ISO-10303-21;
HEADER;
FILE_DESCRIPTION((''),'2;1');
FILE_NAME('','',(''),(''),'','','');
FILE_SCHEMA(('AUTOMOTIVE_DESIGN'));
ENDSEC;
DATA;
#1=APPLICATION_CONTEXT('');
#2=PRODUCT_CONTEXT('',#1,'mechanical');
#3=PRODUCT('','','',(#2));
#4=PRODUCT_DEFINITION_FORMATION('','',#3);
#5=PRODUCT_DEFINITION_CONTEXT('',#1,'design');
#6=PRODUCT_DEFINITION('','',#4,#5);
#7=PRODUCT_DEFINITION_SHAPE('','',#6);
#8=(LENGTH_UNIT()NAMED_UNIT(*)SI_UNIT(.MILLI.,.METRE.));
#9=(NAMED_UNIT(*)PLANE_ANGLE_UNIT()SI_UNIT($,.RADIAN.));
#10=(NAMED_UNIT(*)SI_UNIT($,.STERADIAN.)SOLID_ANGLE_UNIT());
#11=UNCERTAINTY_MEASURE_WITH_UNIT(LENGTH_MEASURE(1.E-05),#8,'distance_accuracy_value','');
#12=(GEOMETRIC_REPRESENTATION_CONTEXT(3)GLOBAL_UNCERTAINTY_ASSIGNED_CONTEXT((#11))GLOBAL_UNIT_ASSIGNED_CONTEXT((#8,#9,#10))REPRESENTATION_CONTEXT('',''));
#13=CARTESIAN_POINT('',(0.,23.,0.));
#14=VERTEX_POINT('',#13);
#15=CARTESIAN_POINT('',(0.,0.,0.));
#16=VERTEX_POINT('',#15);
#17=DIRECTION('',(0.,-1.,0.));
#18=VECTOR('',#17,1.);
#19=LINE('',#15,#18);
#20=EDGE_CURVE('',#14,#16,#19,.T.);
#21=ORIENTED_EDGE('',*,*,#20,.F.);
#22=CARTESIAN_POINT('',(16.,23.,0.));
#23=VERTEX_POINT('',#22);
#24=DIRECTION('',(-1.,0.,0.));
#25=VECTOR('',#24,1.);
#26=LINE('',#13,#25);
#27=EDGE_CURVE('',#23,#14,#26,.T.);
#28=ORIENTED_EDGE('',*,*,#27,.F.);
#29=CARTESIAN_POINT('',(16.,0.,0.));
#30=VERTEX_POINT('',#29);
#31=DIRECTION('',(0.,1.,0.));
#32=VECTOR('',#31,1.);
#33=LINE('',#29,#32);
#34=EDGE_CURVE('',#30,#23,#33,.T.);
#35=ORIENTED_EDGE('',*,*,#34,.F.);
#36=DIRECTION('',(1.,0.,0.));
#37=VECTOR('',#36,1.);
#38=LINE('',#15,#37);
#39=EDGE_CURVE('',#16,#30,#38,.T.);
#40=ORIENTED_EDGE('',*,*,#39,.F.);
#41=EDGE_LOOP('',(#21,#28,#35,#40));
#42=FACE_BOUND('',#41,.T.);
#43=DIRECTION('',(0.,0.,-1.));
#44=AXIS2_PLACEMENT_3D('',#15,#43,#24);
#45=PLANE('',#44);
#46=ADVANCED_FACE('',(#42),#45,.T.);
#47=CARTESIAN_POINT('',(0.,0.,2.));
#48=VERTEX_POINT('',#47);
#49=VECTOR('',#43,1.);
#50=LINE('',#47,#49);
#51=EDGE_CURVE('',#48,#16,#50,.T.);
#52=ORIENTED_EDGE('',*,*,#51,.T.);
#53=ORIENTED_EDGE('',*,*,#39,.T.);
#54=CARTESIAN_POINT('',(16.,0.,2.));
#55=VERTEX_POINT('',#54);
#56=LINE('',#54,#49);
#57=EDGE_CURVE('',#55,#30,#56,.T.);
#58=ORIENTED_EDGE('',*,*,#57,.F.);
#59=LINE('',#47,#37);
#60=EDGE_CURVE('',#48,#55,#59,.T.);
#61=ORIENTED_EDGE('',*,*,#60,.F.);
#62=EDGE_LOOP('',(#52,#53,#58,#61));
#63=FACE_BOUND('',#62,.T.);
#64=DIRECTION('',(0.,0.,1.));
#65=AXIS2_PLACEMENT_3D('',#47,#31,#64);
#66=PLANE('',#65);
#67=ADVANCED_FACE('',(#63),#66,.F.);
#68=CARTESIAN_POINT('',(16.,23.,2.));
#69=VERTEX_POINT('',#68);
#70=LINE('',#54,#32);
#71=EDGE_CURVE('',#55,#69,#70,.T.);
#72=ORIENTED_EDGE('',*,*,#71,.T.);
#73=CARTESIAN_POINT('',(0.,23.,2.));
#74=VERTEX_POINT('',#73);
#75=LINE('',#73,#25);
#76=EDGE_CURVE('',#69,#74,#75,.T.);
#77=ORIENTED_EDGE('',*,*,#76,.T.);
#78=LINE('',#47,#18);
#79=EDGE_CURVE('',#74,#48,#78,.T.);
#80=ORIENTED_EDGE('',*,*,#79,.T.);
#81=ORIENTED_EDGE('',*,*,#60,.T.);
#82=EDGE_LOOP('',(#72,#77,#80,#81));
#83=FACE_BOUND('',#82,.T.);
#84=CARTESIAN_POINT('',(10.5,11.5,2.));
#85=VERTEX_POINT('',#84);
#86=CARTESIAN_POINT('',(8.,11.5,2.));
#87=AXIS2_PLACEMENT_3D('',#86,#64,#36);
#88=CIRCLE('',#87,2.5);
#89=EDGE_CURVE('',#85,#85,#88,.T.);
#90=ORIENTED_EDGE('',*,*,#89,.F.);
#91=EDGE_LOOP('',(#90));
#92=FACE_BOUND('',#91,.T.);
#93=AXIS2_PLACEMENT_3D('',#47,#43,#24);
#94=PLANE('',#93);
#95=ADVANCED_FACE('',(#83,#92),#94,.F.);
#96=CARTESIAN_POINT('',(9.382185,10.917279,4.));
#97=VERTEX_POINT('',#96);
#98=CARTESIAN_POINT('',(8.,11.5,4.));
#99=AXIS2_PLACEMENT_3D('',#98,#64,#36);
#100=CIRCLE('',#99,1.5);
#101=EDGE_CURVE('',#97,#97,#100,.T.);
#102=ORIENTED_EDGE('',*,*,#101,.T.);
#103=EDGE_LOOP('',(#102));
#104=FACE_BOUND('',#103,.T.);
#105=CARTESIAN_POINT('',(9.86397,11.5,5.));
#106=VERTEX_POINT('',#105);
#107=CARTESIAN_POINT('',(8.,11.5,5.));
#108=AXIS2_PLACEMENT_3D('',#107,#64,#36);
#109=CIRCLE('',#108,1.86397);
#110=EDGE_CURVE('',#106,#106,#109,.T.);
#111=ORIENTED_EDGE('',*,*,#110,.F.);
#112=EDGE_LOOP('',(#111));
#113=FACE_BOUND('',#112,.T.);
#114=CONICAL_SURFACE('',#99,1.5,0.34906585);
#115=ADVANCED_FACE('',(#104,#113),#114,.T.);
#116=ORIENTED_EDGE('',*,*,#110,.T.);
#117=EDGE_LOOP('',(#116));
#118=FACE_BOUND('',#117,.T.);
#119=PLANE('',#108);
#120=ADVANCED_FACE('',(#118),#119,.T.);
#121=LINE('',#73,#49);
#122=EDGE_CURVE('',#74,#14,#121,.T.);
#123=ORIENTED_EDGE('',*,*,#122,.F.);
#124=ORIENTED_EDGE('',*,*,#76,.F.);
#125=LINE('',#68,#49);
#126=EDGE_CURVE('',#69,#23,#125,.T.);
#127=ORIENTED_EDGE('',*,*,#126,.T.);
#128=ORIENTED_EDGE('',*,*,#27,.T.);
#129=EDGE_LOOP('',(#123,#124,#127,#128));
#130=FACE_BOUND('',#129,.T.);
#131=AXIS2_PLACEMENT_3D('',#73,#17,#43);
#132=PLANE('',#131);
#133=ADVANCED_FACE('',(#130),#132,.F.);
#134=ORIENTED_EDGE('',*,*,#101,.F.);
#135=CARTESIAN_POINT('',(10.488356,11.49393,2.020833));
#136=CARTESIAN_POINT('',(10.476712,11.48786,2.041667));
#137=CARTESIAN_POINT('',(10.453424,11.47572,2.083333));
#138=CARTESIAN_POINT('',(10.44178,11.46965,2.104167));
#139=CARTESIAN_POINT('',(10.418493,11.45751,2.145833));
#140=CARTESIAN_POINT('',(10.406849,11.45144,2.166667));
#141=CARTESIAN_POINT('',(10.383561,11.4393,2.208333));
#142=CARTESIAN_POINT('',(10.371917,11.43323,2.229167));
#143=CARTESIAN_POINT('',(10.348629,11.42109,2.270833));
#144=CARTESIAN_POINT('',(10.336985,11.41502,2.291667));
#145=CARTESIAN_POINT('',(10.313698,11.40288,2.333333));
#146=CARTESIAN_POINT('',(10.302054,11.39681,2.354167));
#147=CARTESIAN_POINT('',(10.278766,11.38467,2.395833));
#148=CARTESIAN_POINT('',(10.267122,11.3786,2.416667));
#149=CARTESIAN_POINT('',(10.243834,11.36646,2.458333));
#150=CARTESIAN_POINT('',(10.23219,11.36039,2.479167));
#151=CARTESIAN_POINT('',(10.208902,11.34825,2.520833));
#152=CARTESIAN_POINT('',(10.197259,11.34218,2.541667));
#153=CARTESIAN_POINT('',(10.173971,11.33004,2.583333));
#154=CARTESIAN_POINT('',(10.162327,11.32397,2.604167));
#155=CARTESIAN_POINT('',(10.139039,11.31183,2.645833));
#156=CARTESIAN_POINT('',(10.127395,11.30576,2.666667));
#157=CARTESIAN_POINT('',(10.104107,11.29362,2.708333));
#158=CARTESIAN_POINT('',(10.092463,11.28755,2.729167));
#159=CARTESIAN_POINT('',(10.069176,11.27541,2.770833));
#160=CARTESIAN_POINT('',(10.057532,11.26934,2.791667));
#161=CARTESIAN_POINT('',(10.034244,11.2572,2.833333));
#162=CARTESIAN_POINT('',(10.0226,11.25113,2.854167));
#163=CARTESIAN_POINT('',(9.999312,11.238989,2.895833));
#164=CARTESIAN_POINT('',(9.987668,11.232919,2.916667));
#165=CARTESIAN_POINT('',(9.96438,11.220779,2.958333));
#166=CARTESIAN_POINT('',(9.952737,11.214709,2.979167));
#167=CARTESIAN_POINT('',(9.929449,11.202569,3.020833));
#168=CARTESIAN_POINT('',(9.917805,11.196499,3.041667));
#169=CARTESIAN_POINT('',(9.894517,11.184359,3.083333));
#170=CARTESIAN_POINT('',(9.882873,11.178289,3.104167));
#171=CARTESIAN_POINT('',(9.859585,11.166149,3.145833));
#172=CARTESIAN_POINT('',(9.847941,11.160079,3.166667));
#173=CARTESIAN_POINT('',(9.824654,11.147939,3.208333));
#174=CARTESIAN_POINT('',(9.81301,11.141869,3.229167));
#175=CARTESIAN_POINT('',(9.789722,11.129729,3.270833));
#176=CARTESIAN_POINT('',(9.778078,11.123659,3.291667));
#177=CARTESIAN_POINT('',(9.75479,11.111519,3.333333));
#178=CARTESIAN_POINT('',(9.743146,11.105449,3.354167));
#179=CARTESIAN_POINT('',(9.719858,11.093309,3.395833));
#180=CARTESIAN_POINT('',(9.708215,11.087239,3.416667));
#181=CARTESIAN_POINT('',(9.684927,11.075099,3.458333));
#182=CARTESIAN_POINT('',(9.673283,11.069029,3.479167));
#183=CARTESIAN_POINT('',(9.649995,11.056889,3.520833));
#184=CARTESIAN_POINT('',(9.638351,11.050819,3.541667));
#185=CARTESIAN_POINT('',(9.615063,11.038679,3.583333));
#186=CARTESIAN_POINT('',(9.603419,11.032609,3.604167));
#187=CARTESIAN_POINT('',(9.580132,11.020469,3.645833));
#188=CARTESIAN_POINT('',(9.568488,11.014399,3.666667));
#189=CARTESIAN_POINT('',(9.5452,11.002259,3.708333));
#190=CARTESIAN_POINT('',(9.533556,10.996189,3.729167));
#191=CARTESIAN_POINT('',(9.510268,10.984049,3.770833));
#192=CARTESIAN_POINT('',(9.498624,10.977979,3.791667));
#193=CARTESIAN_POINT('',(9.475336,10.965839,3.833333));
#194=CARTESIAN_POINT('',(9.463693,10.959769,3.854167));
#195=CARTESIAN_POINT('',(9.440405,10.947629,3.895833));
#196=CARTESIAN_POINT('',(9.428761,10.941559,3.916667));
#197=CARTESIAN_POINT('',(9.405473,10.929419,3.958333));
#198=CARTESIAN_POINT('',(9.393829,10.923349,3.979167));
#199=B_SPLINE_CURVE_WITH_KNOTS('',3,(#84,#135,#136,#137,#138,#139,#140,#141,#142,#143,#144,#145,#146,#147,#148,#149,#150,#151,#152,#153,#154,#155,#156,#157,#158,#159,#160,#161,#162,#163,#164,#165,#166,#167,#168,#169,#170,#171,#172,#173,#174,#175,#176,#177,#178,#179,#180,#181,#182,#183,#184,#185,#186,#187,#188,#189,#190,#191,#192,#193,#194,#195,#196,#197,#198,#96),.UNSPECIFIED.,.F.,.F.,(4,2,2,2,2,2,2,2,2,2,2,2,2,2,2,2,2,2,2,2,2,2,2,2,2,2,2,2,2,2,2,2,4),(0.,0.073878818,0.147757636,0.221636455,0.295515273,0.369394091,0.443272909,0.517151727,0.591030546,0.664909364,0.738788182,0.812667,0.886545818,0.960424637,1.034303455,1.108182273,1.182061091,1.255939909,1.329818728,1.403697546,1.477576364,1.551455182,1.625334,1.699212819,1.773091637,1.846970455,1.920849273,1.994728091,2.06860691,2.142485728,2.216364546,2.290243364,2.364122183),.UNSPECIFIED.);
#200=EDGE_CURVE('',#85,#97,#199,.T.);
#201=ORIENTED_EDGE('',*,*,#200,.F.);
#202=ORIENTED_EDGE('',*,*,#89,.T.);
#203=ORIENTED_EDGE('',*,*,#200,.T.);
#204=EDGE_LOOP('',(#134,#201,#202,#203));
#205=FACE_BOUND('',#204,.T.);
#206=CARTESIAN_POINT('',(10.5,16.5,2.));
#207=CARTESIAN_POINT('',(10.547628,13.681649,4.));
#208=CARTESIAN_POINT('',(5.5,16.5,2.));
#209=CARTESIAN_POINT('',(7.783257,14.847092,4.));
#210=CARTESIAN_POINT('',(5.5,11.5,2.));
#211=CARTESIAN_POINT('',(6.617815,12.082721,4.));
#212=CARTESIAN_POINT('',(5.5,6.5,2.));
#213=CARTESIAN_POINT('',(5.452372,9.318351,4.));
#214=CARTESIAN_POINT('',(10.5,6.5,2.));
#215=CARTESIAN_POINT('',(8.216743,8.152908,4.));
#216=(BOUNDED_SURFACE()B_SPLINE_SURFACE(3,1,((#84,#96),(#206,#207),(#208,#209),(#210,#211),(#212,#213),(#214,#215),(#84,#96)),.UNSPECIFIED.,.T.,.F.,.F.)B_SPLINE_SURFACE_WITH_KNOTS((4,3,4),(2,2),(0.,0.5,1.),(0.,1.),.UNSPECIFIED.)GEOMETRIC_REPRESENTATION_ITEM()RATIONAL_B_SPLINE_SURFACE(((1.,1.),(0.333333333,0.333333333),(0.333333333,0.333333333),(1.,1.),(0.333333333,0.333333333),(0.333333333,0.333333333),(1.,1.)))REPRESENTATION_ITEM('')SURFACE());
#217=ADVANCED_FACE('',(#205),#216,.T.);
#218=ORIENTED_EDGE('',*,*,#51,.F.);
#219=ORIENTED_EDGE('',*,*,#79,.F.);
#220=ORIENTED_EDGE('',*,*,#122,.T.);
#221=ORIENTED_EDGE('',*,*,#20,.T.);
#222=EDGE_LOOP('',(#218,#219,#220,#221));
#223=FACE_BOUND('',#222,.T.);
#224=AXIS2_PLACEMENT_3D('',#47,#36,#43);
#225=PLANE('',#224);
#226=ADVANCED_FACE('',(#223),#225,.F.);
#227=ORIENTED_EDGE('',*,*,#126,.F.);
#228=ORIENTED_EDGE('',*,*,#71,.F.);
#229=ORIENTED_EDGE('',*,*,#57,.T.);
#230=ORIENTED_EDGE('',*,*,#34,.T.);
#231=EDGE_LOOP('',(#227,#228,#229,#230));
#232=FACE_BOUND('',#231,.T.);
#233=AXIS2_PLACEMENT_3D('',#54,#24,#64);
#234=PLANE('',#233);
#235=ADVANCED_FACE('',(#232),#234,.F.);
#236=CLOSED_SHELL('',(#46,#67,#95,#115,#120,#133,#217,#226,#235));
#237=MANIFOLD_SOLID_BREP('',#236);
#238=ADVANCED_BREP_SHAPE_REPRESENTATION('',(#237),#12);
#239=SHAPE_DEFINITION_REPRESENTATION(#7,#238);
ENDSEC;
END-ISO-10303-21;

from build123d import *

# Parameters (mm, degrees)
SKETCH1_W           = 16
SKETCH1_H           = 23
BOSS_EXTRUDE1_DEPTH = 2
SKETCH6_R           = 1.5
BOSS_EXTRUDE3_DEPTH = 1
BOSS_EXTRUDE3_DRAFT = -20


with BuildPart() as part:
    # Sketch1 → Boss-Extrude1 (new body)
    with BuildSketch(Plane.XY):
        with Locations((8, 11.5)):
            Rectangle(SKETCH1_W, SKETCH1_H)
    extrude(amount=BOSS_EXTRUDE1_DEPTH)

    # Loft1: read off the stored shape, not the designer's step
    # Loft1: loft between two sections, ruled curve by curve
    loft1_from = [
        Edge.make_bspline([(10.5, 11.5, 2), (10.5, 16.5, 2), (5.5, 16.5, 2), (5.5, 11.5, 2), (5.5, 6.5, 2), (10.5, 6.5, 2), (10.5, 11.5, 2)], [0, 0, 0, 0, 0.5, 0.5, 0.5, 1, 1, 1, 1], 3, [1, 0.333333333, 0.333333333, 1, 0.333333333, 0.333333333, 1]),
    ]
    loft1_to = [
        Edge.make_bspline([(9.382185261, 10.91727888, 4), (10.547627501, 13.681649403, 4), (7.783256979, 14.847091642, 4), (6.617814739, 12.08272112, 4), (5.452372499, 9.318350597, 4), (8.216743021, 8.152908358, 4), (9.382185261, 10.91727888, 4)], [0, 0, 0, 0, 0.5, 0.5, 0.5, 1, 1, 1, 1], 3, [1, 0.333333333, 0.333333333, 1, 0.333333333, 0.333333333, 1]),
    ]
    loft1 = Solid(Shell([*[Face.make_surface_from_curves(loft1_from[k], loft1_to[k]) for k in range(1)], Face(Wire(loft1_from)), Face(Wire(loft1_to))]))
    add(loft1)


with BuildPart() as boss_extrude3_tool:
    # Sketch6 → Boss-Extrude3 (with draft: the straight prism first)
    with BuildSketch(Plane.XY.offset(4)):
        with Locations((8, 11.5)):
            Circle(SKETCH6_R)
    extrude(amount=BOSS_EXTRUDE3_DEPTH)
    # Boss-Extrude3: the draft: its side faces are tilted about the plane it starts from
    boss_extrude3_sides = [boss_extrude3_tool.faces().sort_by_distance(p)[0] for p in [
        (6.5, 11.5, 4.5),
    ]]
    draft(boss_extrude3_sides, Plane.XY.offset(4), BOSS_EXTRUDE3_DRAFT)


with BuildPart() as part_1:
    add(part.part)

    # Boss-Extrude3: add boss_extrude3_tool
    add(boss_extrude3_tool.part)


solid = part_1.part
